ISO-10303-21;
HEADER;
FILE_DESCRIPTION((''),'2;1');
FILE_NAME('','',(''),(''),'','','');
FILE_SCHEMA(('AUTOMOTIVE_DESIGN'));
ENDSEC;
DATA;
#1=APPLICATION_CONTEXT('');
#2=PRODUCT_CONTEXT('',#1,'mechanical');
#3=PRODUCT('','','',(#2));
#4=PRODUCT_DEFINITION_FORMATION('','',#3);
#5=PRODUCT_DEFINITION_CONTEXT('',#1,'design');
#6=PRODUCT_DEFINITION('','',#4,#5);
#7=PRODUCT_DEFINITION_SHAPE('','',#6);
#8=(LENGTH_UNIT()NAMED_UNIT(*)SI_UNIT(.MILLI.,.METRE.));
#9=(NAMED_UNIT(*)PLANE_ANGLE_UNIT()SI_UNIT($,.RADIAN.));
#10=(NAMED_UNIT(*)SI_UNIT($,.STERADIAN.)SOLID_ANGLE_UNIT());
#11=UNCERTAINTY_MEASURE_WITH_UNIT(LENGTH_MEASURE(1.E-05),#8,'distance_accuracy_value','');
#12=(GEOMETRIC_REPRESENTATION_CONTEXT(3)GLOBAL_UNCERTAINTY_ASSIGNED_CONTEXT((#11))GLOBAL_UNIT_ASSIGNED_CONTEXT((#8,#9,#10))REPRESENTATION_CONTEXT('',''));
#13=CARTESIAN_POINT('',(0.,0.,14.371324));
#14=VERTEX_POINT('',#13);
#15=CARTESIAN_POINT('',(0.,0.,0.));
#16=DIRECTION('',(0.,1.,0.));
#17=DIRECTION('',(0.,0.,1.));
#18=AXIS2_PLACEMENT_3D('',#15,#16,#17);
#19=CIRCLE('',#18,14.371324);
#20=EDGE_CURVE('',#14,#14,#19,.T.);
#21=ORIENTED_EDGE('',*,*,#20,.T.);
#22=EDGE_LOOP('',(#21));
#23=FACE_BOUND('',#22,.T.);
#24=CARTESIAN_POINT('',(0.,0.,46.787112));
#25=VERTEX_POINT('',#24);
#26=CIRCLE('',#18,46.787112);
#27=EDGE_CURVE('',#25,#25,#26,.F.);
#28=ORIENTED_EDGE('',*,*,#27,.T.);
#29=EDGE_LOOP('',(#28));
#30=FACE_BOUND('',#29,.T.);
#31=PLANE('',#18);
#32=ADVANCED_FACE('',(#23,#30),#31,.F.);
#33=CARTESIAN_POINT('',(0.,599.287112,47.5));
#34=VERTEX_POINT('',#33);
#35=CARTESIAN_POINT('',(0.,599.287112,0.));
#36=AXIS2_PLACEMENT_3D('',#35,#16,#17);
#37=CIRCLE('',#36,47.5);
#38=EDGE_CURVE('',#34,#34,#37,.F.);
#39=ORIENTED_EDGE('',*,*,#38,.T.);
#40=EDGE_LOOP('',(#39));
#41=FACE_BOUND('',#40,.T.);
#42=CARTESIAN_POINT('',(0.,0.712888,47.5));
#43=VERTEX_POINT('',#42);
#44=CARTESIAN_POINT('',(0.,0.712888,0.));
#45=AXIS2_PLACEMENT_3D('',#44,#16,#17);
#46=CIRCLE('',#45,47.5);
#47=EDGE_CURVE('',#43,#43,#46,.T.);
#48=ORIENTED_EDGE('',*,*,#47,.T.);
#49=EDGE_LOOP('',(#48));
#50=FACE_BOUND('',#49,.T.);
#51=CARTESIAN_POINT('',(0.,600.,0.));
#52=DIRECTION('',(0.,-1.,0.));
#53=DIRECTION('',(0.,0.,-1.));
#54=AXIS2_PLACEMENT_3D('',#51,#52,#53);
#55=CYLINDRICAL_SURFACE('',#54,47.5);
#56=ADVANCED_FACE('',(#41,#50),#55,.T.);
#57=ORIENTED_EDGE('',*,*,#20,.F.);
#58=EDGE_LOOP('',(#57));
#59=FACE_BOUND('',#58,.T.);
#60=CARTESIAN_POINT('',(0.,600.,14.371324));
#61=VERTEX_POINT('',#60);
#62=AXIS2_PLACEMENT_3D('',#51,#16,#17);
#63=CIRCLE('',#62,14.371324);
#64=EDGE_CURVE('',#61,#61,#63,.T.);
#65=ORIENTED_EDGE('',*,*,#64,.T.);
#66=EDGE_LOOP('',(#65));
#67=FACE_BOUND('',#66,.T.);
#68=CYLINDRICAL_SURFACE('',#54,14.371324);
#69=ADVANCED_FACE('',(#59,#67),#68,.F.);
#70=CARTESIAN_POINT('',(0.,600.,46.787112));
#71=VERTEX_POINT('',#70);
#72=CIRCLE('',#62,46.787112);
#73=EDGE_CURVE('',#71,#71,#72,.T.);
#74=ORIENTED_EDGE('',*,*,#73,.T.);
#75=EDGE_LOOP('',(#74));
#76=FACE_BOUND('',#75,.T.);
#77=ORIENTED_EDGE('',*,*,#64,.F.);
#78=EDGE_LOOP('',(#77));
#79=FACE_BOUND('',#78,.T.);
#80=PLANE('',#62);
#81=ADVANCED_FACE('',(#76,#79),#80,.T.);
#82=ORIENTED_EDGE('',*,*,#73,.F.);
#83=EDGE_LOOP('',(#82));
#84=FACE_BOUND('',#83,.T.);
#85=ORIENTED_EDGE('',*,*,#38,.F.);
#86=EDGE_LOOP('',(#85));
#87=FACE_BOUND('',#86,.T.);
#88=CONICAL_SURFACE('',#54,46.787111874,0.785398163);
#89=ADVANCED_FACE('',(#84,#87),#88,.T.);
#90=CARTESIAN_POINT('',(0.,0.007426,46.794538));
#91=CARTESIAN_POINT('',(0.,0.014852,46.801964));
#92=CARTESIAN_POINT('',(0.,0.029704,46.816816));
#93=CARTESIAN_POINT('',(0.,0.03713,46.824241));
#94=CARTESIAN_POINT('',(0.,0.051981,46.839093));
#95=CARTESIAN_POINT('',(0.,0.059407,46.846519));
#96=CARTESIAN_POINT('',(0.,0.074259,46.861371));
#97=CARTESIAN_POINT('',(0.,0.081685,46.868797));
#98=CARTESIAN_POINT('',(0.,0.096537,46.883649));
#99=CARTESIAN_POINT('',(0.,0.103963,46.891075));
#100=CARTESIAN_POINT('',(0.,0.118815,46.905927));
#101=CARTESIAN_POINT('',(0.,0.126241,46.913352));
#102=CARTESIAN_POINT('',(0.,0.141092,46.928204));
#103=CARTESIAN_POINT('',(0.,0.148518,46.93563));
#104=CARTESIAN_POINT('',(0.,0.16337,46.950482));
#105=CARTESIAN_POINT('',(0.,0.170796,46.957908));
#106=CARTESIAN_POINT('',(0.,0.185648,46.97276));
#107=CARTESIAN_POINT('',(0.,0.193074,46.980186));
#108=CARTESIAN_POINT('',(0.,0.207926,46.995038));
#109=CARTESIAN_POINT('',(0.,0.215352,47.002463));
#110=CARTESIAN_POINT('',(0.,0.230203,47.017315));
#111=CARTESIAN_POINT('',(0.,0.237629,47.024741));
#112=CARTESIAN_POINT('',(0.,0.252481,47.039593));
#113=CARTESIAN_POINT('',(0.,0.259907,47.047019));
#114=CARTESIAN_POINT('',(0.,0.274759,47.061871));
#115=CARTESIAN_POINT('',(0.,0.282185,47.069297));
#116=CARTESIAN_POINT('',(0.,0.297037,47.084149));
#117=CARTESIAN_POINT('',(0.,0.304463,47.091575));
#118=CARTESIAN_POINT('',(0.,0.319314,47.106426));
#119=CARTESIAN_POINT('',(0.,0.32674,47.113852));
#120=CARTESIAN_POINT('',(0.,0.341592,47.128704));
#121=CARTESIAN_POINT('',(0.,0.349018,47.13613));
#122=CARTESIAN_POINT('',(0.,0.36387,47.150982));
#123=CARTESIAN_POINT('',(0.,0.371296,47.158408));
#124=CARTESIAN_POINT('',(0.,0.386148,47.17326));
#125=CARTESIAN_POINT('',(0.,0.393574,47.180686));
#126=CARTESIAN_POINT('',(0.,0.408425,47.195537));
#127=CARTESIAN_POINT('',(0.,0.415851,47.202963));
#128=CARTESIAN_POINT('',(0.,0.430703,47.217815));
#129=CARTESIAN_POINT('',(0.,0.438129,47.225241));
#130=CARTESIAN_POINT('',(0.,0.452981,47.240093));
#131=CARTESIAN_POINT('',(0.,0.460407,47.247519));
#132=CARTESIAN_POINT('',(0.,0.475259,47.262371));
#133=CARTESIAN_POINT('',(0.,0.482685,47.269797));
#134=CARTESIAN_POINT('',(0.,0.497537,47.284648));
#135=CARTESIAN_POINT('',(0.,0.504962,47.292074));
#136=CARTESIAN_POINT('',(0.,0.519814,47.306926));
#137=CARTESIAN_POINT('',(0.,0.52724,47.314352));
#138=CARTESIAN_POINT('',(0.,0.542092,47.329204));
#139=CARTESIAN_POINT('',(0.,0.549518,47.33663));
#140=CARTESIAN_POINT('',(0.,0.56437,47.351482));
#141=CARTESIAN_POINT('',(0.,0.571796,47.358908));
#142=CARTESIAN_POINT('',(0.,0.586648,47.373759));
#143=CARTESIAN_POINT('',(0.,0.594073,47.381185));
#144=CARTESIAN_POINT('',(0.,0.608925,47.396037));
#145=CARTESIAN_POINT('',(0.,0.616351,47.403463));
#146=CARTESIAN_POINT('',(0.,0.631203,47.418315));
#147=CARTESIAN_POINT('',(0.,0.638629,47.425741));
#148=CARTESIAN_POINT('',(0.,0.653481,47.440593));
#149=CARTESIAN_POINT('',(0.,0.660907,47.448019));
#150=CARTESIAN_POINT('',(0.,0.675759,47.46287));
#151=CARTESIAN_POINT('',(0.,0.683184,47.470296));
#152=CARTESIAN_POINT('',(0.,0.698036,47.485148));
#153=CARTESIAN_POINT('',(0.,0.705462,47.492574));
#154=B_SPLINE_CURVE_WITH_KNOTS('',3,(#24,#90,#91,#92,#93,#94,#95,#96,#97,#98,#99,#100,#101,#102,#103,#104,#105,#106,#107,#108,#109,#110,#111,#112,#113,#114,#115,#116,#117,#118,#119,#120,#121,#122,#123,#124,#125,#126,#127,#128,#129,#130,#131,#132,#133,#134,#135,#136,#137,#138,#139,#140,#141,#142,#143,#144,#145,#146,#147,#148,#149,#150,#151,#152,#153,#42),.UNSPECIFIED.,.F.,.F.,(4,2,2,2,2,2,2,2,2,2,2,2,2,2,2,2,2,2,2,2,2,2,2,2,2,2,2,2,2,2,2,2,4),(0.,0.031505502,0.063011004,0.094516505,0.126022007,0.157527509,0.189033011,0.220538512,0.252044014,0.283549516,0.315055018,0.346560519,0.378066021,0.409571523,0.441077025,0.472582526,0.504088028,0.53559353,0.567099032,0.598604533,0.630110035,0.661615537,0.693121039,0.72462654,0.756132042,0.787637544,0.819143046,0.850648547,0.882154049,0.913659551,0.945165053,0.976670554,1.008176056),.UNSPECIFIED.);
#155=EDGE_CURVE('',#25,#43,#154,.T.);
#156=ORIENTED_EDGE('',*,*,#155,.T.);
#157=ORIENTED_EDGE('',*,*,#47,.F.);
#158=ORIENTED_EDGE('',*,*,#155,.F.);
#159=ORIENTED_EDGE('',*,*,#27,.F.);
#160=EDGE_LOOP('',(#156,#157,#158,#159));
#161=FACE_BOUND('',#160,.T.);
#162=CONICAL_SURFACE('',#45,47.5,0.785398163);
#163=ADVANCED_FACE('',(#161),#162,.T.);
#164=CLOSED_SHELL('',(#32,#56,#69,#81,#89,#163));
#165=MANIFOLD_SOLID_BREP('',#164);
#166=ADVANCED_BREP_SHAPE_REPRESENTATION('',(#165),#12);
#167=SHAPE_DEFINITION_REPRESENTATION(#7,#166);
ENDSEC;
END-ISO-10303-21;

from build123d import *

# Parameters (mm, degrees)
SKETCH1_R           = 47.5
BOSS_EXTRUDE1_DEPTH = 600
SKETCH2_R           = 14.371323885
CUT_EXTRUDE1_DEPTH  = 604.748706003
CHAMFER1_SIZE       = 0.712888126


with BuildPart() as part:
    # Sketch1 → Boss-Extrude1 (new body)
    with BuildSketch(Plane(origin=(0, 0, 0), x_dir=(1, 0, 0), z_dir=(0, 1, 0))):
        Circle(SKETCH1_R)
    extrude(amount=BOSS_EXTRUDE1_DEPTH)

    # Sketch2 → Cut-Extrude1 (cut, through all)
    with BuildSketch(Plane(origin=(0, 0, 0), x_dir=(1, 0, 0), z_dir=(0, 1, 0))):
        Circle(SKETCH2_R)
    extrude(amount=CUT_EXTRUDE1_DEPTH, mode=Mode.SUBTRACT)

    # Chamfer1
    chamfer1_edges = [part.edges().sort_by_distance(p)[0] for p in [
        (-47.5, 600, 0),
        (-47.5, 0, 0),
    ]]
    chamfer(chamfer1_edges, length=CHAMFER1_SIZE)


solid = part.part
